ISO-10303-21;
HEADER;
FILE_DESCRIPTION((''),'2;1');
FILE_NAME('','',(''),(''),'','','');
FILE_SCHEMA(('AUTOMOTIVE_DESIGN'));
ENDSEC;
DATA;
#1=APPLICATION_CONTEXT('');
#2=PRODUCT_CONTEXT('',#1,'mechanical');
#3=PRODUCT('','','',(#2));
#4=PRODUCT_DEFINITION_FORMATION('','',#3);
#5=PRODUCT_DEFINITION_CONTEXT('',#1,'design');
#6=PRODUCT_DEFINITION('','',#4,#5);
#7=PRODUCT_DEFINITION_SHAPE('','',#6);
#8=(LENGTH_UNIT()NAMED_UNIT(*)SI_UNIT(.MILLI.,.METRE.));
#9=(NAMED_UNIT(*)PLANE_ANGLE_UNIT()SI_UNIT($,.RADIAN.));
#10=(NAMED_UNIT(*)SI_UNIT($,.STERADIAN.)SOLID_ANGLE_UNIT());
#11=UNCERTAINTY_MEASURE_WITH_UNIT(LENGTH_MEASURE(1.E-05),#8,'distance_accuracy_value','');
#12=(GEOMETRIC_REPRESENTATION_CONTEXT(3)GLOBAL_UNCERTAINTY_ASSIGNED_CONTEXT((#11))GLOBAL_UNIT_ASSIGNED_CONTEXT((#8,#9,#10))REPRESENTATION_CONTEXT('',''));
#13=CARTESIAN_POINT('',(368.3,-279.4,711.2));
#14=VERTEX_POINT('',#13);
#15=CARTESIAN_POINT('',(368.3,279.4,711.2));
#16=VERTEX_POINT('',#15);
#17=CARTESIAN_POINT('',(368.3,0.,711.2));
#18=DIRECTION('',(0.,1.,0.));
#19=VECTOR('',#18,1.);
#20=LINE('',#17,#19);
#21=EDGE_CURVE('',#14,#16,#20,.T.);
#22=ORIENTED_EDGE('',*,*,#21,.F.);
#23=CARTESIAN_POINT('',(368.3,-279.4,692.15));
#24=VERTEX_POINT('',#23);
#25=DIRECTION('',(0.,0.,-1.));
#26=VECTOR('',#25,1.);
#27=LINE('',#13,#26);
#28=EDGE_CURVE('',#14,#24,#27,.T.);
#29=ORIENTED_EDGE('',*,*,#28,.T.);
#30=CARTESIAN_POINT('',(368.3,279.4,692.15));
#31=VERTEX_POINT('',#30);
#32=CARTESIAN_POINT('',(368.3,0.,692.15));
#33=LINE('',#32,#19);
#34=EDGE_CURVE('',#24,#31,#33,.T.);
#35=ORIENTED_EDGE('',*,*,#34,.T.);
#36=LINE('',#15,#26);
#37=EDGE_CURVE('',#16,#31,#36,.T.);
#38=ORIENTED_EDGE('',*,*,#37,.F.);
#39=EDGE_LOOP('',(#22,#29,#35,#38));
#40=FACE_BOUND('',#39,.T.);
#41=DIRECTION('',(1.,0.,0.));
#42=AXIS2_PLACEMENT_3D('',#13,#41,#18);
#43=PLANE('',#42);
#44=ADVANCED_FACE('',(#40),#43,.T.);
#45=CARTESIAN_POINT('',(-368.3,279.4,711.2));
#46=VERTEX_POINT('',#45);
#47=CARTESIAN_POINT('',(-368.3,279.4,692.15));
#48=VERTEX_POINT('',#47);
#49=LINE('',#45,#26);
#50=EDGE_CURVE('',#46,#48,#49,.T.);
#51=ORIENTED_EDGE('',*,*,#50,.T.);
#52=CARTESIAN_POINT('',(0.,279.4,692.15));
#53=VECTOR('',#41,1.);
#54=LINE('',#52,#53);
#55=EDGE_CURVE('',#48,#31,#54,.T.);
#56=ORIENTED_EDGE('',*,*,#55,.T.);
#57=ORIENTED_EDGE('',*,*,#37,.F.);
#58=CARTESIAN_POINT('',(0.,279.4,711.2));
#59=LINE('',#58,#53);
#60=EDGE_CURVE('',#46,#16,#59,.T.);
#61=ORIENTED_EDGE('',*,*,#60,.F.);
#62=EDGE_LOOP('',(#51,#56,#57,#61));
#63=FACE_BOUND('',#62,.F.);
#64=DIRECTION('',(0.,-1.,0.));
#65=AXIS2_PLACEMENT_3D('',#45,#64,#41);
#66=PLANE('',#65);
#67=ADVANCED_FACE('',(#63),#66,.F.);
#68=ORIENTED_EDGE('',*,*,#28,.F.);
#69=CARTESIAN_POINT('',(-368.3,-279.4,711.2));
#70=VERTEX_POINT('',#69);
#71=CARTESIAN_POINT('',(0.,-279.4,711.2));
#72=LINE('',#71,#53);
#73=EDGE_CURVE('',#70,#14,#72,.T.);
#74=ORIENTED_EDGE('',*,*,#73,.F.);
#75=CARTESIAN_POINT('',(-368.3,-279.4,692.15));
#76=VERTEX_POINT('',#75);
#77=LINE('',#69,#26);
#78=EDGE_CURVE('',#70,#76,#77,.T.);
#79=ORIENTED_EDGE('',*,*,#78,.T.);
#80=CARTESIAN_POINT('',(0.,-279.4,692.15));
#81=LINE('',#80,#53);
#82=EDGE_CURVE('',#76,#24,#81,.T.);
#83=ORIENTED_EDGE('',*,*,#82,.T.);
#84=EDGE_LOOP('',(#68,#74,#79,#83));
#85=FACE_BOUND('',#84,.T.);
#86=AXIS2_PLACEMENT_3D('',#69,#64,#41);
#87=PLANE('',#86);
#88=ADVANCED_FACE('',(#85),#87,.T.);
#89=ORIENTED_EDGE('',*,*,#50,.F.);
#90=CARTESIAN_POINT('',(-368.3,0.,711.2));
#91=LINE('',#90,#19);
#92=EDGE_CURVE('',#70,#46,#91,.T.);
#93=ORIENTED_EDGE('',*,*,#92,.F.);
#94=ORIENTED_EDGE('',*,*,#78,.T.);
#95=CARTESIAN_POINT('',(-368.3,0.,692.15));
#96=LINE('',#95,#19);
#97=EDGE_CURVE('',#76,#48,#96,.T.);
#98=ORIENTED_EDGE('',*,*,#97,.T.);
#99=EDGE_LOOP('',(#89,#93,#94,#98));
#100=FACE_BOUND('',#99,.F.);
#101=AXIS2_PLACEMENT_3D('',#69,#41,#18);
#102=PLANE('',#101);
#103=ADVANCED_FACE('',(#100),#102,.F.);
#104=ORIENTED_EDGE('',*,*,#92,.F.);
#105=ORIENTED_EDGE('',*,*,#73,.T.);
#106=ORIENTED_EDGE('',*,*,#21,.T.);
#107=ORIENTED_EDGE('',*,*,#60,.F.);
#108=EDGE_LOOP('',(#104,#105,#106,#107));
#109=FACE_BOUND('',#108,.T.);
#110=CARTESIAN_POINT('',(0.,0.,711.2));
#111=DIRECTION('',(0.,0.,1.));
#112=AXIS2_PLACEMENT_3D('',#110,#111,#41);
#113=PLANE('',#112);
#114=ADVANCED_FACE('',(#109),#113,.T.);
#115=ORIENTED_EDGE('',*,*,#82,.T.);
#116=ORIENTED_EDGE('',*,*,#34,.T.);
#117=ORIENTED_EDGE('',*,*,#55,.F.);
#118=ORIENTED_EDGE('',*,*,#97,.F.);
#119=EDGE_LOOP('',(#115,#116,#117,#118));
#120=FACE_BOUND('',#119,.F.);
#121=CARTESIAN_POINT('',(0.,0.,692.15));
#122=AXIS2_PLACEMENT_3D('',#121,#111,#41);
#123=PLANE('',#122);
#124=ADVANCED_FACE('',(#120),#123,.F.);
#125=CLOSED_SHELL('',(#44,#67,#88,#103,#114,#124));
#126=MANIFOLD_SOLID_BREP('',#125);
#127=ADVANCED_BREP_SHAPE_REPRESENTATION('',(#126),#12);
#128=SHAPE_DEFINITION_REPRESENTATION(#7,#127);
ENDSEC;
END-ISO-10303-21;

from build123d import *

# Parameters (mm, degrees)
F1_W     = 736.6
F1_H     = 558.8
F2_DEPTH = 19.05


# Not quite as in the source:
# - a feature of the source that left no trace in its solid (it failed there, or was rolled back) is left out


with BuildPart() as f2:
    # F1 (on offset) → F2 (new body)
    with BuildSketch(Plane.XY.offset(711.2)):
        Rectangle(F1_W, F1_H)
    extrude(amount=-F2_DEPTH)


solid = f2.part
